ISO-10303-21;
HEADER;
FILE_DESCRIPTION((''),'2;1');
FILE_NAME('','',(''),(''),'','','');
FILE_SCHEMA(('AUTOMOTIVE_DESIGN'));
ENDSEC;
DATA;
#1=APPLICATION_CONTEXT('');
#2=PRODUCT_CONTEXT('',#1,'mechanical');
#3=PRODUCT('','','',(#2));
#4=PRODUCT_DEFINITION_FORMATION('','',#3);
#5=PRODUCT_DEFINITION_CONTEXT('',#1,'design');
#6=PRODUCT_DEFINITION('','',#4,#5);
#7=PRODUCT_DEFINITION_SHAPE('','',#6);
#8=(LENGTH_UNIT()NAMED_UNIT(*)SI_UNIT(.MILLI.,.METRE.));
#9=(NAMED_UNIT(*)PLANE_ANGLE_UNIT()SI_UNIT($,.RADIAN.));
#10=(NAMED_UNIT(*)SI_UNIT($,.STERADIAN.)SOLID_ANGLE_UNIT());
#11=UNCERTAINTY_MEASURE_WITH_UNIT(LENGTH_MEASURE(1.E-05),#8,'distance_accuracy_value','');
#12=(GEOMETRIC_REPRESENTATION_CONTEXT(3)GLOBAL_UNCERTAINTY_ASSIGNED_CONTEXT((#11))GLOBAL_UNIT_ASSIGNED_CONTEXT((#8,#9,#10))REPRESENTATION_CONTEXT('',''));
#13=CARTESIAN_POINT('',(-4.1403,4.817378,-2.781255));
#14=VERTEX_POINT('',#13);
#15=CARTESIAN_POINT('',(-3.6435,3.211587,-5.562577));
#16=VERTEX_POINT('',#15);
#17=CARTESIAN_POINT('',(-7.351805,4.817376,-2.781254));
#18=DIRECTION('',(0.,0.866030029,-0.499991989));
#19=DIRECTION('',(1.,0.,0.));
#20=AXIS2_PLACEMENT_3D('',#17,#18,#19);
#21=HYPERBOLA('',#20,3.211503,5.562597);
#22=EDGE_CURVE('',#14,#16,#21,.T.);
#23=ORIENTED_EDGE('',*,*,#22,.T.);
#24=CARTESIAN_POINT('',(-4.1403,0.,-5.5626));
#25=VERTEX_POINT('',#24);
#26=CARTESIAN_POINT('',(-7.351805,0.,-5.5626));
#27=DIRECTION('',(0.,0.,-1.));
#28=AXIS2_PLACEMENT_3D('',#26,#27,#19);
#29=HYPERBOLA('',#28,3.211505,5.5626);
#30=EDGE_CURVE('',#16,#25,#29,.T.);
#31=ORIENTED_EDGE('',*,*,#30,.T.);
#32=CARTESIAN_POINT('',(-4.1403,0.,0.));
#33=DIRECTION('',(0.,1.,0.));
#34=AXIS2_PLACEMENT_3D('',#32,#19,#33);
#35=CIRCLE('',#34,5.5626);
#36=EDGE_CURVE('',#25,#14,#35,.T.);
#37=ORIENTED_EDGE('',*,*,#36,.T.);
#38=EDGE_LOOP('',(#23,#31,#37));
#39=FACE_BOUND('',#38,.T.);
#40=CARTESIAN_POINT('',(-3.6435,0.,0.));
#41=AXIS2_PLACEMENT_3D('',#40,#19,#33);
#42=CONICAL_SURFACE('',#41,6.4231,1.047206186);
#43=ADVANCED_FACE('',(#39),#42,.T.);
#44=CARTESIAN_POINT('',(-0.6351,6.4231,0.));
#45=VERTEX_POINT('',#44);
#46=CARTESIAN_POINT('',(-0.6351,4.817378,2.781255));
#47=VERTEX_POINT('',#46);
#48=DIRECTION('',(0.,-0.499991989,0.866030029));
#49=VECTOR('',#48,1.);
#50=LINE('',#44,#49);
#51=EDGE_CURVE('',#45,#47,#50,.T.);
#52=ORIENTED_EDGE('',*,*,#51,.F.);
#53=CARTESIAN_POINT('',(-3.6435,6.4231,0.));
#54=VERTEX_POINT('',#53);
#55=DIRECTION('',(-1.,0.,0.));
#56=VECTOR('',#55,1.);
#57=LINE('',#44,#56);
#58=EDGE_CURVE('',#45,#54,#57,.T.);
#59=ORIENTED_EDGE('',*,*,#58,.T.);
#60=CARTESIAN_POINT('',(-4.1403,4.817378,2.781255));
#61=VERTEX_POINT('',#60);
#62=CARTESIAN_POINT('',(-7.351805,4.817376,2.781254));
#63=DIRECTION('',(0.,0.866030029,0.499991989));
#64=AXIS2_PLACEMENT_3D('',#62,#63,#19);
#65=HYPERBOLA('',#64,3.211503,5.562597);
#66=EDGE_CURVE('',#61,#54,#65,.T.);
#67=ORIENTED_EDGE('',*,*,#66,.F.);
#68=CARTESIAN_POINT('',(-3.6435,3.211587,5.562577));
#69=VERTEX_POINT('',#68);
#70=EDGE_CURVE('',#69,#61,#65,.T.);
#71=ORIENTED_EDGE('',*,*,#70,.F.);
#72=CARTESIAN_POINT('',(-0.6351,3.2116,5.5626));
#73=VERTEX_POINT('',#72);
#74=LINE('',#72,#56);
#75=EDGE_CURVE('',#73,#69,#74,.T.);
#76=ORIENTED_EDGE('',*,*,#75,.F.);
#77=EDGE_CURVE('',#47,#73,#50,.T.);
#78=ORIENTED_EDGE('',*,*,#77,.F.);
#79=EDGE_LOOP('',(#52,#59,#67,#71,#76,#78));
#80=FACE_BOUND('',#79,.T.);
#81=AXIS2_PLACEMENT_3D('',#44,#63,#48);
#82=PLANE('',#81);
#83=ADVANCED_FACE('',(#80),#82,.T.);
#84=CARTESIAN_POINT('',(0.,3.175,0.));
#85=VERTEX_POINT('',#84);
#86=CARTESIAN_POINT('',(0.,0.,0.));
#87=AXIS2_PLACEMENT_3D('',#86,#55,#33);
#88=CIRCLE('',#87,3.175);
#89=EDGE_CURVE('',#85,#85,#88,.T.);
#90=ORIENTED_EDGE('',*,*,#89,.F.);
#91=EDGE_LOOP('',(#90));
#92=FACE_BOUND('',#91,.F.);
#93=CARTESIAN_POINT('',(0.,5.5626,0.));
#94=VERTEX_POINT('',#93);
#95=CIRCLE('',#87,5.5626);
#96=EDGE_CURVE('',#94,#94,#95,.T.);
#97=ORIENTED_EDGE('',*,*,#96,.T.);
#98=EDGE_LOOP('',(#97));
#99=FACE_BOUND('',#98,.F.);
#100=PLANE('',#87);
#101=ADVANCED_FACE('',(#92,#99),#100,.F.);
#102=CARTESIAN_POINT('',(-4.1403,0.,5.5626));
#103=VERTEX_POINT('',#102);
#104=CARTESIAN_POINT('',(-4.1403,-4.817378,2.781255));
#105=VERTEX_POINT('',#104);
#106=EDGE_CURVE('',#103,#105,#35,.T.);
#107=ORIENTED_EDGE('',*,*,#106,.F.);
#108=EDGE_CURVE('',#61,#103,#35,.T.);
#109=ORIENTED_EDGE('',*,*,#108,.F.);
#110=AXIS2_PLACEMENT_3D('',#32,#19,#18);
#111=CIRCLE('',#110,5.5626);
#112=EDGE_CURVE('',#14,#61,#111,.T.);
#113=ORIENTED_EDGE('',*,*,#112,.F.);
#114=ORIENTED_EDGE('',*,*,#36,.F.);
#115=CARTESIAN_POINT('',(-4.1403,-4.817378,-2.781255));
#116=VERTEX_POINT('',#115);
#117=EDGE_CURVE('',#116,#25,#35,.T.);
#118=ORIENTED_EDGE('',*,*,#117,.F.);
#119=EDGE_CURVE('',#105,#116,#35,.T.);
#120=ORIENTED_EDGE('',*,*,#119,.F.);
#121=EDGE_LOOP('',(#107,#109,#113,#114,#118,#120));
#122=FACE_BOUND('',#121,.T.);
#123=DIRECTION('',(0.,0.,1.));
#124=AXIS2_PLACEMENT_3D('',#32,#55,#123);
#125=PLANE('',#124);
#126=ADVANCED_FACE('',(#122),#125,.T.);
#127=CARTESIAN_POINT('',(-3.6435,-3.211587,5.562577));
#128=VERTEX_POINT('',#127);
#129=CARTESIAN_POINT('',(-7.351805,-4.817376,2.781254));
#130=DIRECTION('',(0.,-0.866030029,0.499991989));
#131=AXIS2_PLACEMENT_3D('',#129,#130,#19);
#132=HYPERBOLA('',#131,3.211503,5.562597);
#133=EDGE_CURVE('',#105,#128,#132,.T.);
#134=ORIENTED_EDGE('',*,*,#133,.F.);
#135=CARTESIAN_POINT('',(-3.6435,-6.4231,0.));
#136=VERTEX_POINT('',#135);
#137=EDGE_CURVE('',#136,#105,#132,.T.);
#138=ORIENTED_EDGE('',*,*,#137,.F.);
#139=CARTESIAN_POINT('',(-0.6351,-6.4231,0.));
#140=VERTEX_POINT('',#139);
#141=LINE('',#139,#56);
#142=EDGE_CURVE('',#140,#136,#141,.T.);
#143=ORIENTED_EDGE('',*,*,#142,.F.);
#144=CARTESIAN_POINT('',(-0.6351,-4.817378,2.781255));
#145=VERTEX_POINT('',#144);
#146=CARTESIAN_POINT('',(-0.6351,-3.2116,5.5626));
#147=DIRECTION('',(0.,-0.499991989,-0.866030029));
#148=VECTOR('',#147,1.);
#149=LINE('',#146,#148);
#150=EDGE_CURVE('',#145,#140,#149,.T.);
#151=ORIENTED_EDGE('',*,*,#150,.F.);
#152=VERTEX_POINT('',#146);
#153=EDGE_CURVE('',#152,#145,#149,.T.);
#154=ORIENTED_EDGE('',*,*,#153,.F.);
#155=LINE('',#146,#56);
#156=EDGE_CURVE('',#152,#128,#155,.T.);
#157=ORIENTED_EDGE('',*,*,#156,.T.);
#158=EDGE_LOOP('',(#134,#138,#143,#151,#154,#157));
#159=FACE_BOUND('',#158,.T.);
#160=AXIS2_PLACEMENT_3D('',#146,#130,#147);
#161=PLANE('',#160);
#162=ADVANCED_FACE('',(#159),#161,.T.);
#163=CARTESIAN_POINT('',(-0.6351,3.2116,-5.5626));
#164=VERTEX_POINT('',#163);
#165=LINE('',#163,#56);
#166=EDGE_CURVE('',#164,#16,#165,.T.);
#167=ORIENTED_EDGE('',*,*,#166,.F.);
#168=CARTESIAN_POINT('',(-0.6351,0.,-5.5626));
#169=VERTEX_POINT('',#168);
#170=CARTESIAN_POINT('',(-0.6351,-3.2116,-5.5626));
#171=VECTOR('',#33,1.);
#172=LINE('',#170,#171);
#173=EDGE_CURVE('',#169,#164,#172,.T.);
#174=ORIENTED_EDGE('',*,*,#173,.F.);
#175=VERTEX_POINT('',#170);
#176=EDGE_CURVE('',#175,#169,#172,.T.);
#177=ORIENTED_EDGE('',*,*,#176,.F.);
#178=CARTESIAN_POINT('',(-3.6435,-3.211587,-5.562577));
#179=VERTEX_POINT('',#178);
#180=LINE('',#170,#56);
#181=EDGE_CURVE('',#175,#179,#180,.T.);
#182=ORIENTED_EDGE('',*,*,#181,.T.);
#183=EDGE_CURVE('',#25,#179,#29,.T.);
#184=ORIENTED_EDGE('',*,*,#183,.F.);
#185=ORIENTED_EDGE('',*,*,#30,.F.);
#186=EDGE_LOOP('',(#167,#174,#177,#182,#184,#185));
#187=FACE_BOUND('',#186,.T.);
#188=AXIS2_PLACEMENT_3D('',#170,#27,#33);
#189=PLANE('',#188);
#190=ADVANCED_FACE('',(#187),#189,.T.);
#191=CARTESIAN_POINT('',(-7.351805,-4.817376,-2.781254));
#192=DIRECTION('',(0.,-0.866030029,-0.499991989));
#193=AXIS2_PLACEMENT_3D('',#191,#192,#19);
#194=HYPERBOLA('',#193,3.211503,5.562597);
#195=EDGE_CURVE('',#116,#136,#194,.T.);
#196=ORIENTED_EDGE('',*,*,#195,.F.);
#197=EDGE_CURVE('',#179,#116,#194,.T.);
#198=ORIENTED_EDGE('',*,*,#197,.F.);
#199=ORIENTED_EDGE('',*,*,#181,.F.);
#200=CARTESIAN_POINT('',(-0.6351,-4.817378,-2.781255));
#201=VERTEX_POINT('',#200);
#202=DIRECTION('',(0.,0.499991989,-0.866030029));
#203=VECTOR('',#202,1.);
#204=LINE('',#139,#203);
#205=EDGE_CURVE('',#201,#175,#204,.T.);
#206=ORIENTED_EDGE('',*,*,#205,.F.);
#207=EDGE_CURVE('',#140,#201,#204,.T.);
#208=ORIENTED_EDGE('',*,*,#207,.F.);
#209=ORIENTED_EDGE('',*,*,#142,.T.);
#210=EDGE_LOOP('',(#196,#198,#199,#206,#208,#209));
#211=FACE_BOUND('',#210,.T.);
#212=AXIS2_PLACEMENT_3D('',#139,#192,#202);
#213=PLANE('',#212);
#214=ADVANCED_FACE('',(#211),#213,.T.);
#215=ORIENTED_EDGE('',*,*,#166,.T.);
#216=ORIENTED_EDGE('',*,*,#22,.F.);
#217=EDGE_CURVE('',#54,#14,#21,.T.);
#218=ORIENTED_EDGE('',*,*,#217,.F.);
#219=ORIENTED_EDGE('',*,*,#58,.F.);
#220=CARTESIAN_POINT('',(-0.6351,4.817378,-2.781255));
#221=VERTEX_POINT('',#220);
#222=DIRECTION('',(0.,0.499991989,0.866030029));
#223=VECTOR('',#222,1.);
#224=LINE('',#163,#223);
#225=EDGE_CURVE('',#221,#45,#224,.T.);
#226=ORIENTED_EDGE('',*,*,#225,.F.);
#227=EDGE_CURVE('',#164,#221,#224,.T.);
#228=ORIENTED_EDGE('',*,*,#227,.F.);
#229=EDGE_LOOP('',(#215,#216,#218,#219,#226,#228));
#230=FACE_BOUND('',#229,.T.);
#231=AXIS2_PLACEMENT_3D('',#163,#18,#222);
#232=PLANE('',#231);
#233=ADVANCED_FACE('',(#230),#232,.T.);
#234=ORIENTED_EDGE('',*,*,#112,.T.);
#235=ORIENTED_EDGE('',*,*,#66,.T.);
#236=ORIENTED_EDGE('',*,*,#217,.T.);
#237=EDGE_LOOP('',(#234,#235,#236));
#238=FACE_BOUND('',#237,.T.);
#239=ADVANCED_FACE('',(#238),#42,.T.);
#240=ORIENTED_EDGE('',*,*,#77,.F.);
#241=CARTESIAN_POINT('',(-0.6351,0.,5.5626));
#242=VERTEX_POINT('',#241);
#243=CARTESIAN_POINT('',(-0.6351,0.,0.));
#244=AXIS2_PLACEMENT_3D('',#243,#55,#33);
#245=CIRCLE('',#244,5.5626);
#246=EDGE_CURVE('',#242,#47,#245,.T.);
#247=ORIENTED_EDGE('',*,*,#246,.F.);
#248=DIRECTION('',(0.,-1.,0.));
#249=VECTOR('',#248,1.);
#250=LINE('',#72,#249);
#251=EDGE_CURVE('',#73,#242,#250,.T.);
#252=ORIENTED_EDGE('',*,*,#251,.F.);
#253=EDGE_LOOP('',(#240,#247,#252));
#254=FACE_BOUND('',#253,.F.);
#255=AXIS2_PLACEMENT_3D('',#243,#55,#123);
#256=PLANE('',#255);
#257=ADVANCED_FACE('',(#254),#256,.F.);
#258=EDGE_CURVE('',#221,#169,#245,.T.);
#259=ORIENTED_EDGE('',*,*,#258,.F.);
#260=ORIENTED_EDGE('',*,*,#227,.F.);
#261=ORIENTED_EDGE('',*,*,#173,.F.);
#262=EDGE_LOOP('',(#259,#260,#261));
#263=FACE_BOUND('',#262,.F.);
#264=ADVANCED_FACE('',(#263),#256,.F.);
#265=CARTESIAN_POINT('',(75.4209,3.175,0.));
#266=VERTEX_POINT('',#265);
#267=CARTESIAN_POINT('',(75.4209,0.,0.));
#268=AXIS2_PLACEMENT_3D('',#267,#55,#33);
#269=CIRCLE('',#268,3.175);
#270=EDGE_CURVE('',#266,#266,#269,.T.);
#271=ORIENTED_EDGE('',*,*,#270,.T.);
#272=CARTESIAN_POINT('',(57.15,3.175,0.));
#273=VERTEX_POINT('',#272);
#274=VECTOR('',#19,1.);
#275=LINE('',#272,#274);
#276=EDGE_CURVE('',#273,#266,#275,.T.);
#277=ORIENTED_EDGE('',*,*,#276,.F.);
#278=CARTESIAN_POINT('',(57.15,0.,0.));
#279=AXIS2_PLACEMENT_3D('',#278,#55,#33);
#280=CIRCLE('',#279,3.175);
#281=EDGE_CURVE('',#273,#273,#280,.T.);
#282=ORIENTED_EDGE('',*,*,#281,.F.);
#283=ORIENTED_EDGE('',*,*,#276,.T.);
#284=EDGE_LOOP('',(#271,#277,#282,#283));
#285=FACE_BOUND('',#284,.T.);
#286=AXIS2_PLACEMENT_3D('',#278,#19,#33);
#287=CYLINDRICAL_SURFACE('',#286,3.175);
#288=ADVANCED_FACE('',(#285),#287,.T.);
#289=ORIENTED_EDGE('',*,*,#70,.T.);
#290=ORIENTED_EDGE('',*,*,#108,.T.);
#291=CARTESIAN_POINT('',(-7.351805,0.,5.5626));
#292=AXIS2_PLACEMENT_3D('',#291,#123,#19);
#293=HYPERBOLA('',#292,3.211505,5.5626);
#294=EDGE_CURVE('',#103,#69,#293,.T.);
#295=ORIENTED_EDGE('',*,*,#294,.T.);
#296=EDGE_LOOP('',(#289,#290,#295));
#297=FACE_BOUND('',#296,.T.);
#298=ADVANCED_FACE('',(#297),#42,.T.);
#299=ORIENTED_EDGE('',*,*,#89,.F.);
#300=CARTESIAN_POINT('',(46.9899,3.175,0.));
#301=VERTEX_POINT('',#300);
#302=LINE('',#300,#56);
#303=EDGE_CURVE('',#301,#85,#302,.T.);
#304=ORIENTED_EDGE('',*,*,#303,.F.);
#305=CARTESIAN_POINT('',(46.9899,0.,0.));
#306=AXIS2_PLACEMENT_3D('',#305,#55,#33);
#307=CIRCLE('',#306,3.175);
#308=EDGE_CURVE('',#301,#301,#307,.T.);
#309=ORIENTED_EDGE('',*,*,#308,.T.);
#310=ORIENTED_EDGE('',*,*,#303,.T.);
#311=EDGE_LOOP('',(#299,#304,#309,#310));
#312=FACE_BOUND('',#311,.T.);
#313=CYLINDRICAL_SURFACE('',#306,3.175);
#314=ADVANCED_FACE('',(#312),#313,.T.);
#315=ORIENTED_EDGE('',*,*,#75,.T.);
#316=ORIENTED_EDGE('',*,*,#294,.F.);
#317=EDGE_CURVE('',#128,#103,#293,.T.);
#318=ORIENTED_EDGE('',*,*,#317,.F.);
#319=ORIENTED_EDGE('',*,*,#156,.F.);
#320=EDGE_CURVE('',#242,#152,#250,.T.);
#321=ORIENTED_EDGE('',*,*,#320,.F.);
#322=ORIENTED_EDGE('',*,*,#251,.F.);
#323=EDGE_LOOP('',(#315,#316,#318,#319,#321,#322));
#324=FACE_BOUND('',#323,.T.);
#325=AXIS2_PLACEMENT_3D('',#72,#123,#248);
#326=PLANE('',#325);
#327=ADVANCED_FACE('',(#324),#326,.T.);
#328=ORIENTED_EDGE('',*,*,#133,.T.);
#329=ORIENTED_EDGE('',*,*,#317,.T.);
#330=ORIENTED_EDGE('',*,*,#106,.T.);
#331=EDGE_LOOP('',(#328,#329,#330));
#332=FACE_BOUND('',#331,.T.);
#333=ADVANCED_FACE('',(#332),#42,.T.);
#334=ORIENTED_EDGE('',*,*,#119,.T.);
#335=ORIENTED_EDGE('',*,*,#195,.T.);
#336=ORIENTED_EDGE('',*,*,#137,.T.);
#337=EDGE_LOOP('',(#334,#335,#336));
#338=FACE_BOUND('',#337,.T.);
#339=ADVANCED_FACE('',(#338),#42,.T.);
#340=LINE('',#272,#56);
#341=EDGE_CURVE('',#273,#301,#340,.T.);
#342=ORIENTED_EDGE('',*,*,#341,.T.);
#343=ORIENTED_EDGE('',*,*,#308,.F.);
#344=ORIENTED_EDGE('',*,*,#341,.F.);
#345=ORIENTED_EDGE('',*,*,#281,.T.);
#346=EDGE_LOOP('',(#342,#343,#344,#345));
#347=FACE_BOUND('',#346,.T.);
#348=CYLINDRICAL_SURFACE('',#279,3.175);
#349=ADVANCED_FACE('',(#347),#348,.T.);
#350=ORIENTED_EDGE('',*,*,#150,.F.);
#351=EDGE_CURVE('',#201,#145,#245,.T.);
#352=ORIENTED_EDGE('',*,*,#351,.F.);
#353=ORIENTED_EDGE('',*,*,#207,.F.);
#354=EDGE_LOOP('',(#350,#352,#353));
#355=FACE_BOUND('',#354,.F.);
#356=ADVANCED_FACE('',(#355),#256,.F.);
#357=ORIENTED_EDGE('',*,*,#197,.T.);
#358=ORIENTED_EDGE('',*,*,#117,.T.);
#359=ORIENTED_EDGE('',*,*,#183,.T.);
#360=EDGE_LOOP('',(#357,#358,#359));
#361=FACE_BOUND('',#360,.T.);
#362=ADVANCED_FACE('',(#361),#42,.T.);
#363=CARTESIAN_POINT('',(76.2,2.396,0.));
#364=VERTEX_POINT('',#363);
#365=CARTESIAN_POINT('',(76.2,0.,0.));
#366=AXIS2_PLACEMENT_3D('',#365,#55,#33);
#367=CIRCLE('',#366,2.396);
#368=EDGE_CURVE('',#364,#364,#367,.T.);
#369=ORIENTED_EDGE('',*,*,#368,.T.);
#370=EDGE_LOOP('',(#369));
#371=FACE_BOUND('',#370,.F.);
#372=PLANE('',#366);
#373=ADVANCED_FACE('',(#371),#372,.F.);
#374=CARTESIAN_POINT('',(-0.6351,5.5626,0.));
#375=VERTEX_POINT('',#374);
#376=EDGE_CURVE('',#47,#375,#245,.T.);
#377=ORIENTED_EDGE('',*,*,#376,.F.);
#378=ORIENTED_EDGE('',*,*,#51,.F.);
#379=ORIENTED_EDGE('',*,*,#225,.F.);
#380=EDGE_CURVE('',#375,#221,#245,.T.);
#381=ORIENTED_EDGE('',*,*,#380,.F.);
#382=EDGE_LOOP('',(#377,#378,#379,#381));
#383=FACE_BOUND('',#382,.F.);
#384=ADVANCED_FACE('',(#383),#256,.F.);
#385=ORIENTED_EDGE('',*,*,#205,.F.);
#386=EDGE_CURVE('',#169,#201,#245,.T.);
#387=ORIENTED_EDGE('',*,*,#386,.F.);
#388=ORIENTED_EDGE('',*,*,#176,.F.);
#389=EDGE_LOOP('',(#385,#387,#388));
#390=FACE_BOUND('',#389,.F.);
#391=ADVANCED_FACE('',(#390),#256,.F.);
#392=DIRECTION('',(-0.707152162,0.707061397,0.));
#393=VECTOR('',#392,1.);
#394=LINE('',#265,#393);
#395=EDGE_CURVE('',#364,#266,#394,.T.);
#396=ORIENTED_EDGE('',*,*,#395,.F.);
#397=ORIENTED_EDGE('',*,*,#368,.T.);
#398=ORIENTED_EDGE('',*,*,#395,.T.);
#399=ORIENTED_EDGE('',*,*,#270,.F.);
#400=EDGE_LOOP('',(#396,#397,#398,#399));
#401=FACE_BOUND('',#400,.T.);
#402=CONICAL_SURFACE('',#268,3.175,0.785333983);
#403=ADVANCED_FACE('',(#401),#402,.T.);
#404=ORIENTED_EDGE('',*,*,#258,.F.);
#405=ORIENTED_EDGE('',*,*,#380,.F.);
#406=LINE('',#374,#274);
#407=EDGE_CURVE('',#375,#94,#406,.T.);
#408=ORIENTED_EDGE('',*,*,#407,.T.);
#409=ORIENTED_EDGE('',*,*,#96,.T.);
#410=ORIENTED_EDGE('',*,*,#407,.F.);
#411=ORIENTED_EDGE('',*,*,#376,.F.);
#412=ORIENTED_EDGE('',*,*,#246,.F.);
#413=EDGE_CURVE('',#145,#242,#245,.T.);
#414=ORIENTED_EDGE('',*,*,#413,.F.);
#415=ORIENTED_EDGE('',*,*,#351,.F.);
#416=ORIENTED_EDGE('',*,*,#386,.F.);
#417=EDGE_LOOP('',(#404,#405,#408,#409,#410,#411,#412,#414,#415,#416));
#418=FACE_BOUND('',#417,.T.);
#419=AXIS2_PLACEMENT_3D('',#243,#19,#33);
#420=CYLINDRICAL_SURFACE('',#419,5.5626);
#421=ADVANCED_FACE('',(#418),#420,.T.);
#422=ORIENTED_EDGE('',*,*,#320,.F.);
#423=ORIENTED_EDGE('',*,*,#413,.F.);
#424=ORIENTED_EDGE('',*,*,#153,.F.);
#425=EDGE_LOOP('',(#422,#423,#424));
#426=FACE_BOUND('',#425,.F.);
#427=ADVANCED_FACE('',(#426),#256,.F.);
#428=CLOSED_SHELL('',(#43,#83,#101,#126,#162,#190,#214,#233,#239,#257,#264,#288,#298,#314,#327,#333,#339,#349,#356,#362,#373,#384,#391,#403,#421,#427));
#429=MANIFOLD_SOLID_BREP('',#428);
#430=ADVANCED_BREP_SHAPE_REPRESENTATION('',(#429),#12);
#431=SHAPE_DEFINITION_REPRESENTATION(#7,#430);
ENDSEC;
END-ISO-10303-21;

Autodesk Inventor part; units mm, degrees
ref_plane "YZ Plane" through (0, 0, 0) normal (1, 0, 0) x (0, 1, 0)
ref_plane "XZ Plane" through (0, 0, 0) normal (0, 1, 0) x (-1, 0, 0)
sketch "Sketch1" plane through (0, 0, 0) normal (0, 0, 1) x (1, 0, 0)
  line L0 (0, 5.5626) -> (0, 3.175)
  line L1 (57.15, 3.175) -> (76.2, 3.175)
  line L2 (76.2, 3.175) -> (76.2, 0)
  line L3 (76.2, 0) -> (-0.6351, 0)
  line L4 (-16.0021, 0) -> (91.567, 0) projected
  line L5 (-0.6351, 0) -> (-0.6351, 5.5626)
  line L6 (-0.6351, 5.5626) -> (0, 5.5626)
  line L7 (57.15, 3.175) -> (46.9899, 3.175)
  line L8 (46.9899, 3.175) -> (0, 3.175)
  line L9 (0, -1.1125) -> (0, 6.6751) projected
  dimension "d0" = 76.2
  dimension "d1" = 19.05
  dimension "d2" = 6.35
  dimension "d9" = 0.6351
  dimension "d10" = 11.1252
  dimension "d13" = 10.1601
  dimension "d14" = 6.35
revolve "Body" add sketch "Sketch1" angle 360 about axis through (76.2, 0, 0) along (-1, 0, 0)
sketch "Sketch2" plane through (-0.6351, 0, 0) normal (-1, 0, 0) x (0, 0, 1)
  line L0 (0, 6.4231) -> (5.5626, 3.2116)
  line L1 (5.5626, 3.2116) -> (5.5626, -3.2116)
  line L2 (5.5626, -3.2116) -> (0, -6.4231)
  line L3 (0, -6.4231) -> (-5.5626, -3.2116)
  line L4 (-5.5626, -3.2116) -> (-5.5626, 3.2116)
  line L5 (-5.5626, 3.2116) -> (0, 6.4231)
  point P0 (0, 0)
  point P1 (0, 0)
  dimension "d11" = 11.1252
extrude "Head" add sketch "Sketch2" along normal blind 3.5052
sketch "Sketch4" plane through (0, 0, 0) normal (0, 0, 1) x (1, 0, 0)
  line L0 (-4.1403, 5.5626) -> (-4.1403, 6.4231)
  line L1 (-4.1403, 6.4231) -> (-3.6435, 6.4231)
  line L2 (-3.6435, 6.4231) -> (-4.1403, 5.5626)
  line L3 (-4.8413, 0) -> (0.0659, 0) projected
  line L4 (-0.6351, 6.4231) -> (-4.1403, 6.4231) projected
  line L5 (-4.1403, 3.2116) -> (-4.1403, 6.4231) projected
  dimension "d5" = 30
  dimension "d19" = 11.1252
revolve "Chamfer1" cut sketch "Sketch4" angle 360 about axis through (-10, 0, 0) along (1, 0, 0)
thread "Thread" size "1/4-20 UNC" class "2A" standard "ANSI Unified Screw Threads" length 19.05
chamfer "Chamfer2" distance 0.779 distance2 0.7791 1 edges at (76.2, -3.175, 0) measured on face at (76.2, 1.0276, -0.2533)
ref_plane "Work Plane1" through (1.525, 0, 0) normal (0, 0, 1) x (1, 0, 0)
equation "\"d0\" = NLG"
equation "\"d1\" = GEL"
equation "\"d2\" = GD"
equation "\"d10\" = SD2"
equation "\"d14\" = BDM"
equation "\"d11\" = SW"
equation "\"d3\" = KOH - SD"
equation "\"d5\" = ANG1"
equation "\"d19\" = SW0"
equation "\"d15\" = GEL"
equation "\"d6\" = -0.5 * SPD + 0.5 * GD"
equation "\"NLG\" = 76.2"
equation "\"GD\" = 6.35"
equation "\"BDM\" = 6.35"
equation "\"KOH\" = 4.1402"
equation "\"GEL\" = 19.05"
equation "\"SW\" = 11.1252"
equation "\"SW0\" = SW"
equation "\"SPD\" = GD1"
equation "\"SD2\" = SW"
equation "\"SD\" = 0.635"
equation "\"ANG1\" = 30deg"
equation "\"GAL\" = 10.16"
equation "\"GUL\" = 0.77902"
equation "\"RR\" = 0.381"
equation "\"WFT\" = SD"
equation "\"GD1\" = 4.79196"
equation "\"THREADDIA\" = 6.35"
equation "\"SDH\" = SW"
equation "\"SDHG\" = 46.99"
equation "\"TOA\" = 30deg"
equation "\"FAWI\" = 45deg"
equation "\"NND\" = 6.35"
equation "\"E0\" = 12.84961"
properties part number "AS 2465 - 1/4 x 3  UNC" material "Steel, Mild"
